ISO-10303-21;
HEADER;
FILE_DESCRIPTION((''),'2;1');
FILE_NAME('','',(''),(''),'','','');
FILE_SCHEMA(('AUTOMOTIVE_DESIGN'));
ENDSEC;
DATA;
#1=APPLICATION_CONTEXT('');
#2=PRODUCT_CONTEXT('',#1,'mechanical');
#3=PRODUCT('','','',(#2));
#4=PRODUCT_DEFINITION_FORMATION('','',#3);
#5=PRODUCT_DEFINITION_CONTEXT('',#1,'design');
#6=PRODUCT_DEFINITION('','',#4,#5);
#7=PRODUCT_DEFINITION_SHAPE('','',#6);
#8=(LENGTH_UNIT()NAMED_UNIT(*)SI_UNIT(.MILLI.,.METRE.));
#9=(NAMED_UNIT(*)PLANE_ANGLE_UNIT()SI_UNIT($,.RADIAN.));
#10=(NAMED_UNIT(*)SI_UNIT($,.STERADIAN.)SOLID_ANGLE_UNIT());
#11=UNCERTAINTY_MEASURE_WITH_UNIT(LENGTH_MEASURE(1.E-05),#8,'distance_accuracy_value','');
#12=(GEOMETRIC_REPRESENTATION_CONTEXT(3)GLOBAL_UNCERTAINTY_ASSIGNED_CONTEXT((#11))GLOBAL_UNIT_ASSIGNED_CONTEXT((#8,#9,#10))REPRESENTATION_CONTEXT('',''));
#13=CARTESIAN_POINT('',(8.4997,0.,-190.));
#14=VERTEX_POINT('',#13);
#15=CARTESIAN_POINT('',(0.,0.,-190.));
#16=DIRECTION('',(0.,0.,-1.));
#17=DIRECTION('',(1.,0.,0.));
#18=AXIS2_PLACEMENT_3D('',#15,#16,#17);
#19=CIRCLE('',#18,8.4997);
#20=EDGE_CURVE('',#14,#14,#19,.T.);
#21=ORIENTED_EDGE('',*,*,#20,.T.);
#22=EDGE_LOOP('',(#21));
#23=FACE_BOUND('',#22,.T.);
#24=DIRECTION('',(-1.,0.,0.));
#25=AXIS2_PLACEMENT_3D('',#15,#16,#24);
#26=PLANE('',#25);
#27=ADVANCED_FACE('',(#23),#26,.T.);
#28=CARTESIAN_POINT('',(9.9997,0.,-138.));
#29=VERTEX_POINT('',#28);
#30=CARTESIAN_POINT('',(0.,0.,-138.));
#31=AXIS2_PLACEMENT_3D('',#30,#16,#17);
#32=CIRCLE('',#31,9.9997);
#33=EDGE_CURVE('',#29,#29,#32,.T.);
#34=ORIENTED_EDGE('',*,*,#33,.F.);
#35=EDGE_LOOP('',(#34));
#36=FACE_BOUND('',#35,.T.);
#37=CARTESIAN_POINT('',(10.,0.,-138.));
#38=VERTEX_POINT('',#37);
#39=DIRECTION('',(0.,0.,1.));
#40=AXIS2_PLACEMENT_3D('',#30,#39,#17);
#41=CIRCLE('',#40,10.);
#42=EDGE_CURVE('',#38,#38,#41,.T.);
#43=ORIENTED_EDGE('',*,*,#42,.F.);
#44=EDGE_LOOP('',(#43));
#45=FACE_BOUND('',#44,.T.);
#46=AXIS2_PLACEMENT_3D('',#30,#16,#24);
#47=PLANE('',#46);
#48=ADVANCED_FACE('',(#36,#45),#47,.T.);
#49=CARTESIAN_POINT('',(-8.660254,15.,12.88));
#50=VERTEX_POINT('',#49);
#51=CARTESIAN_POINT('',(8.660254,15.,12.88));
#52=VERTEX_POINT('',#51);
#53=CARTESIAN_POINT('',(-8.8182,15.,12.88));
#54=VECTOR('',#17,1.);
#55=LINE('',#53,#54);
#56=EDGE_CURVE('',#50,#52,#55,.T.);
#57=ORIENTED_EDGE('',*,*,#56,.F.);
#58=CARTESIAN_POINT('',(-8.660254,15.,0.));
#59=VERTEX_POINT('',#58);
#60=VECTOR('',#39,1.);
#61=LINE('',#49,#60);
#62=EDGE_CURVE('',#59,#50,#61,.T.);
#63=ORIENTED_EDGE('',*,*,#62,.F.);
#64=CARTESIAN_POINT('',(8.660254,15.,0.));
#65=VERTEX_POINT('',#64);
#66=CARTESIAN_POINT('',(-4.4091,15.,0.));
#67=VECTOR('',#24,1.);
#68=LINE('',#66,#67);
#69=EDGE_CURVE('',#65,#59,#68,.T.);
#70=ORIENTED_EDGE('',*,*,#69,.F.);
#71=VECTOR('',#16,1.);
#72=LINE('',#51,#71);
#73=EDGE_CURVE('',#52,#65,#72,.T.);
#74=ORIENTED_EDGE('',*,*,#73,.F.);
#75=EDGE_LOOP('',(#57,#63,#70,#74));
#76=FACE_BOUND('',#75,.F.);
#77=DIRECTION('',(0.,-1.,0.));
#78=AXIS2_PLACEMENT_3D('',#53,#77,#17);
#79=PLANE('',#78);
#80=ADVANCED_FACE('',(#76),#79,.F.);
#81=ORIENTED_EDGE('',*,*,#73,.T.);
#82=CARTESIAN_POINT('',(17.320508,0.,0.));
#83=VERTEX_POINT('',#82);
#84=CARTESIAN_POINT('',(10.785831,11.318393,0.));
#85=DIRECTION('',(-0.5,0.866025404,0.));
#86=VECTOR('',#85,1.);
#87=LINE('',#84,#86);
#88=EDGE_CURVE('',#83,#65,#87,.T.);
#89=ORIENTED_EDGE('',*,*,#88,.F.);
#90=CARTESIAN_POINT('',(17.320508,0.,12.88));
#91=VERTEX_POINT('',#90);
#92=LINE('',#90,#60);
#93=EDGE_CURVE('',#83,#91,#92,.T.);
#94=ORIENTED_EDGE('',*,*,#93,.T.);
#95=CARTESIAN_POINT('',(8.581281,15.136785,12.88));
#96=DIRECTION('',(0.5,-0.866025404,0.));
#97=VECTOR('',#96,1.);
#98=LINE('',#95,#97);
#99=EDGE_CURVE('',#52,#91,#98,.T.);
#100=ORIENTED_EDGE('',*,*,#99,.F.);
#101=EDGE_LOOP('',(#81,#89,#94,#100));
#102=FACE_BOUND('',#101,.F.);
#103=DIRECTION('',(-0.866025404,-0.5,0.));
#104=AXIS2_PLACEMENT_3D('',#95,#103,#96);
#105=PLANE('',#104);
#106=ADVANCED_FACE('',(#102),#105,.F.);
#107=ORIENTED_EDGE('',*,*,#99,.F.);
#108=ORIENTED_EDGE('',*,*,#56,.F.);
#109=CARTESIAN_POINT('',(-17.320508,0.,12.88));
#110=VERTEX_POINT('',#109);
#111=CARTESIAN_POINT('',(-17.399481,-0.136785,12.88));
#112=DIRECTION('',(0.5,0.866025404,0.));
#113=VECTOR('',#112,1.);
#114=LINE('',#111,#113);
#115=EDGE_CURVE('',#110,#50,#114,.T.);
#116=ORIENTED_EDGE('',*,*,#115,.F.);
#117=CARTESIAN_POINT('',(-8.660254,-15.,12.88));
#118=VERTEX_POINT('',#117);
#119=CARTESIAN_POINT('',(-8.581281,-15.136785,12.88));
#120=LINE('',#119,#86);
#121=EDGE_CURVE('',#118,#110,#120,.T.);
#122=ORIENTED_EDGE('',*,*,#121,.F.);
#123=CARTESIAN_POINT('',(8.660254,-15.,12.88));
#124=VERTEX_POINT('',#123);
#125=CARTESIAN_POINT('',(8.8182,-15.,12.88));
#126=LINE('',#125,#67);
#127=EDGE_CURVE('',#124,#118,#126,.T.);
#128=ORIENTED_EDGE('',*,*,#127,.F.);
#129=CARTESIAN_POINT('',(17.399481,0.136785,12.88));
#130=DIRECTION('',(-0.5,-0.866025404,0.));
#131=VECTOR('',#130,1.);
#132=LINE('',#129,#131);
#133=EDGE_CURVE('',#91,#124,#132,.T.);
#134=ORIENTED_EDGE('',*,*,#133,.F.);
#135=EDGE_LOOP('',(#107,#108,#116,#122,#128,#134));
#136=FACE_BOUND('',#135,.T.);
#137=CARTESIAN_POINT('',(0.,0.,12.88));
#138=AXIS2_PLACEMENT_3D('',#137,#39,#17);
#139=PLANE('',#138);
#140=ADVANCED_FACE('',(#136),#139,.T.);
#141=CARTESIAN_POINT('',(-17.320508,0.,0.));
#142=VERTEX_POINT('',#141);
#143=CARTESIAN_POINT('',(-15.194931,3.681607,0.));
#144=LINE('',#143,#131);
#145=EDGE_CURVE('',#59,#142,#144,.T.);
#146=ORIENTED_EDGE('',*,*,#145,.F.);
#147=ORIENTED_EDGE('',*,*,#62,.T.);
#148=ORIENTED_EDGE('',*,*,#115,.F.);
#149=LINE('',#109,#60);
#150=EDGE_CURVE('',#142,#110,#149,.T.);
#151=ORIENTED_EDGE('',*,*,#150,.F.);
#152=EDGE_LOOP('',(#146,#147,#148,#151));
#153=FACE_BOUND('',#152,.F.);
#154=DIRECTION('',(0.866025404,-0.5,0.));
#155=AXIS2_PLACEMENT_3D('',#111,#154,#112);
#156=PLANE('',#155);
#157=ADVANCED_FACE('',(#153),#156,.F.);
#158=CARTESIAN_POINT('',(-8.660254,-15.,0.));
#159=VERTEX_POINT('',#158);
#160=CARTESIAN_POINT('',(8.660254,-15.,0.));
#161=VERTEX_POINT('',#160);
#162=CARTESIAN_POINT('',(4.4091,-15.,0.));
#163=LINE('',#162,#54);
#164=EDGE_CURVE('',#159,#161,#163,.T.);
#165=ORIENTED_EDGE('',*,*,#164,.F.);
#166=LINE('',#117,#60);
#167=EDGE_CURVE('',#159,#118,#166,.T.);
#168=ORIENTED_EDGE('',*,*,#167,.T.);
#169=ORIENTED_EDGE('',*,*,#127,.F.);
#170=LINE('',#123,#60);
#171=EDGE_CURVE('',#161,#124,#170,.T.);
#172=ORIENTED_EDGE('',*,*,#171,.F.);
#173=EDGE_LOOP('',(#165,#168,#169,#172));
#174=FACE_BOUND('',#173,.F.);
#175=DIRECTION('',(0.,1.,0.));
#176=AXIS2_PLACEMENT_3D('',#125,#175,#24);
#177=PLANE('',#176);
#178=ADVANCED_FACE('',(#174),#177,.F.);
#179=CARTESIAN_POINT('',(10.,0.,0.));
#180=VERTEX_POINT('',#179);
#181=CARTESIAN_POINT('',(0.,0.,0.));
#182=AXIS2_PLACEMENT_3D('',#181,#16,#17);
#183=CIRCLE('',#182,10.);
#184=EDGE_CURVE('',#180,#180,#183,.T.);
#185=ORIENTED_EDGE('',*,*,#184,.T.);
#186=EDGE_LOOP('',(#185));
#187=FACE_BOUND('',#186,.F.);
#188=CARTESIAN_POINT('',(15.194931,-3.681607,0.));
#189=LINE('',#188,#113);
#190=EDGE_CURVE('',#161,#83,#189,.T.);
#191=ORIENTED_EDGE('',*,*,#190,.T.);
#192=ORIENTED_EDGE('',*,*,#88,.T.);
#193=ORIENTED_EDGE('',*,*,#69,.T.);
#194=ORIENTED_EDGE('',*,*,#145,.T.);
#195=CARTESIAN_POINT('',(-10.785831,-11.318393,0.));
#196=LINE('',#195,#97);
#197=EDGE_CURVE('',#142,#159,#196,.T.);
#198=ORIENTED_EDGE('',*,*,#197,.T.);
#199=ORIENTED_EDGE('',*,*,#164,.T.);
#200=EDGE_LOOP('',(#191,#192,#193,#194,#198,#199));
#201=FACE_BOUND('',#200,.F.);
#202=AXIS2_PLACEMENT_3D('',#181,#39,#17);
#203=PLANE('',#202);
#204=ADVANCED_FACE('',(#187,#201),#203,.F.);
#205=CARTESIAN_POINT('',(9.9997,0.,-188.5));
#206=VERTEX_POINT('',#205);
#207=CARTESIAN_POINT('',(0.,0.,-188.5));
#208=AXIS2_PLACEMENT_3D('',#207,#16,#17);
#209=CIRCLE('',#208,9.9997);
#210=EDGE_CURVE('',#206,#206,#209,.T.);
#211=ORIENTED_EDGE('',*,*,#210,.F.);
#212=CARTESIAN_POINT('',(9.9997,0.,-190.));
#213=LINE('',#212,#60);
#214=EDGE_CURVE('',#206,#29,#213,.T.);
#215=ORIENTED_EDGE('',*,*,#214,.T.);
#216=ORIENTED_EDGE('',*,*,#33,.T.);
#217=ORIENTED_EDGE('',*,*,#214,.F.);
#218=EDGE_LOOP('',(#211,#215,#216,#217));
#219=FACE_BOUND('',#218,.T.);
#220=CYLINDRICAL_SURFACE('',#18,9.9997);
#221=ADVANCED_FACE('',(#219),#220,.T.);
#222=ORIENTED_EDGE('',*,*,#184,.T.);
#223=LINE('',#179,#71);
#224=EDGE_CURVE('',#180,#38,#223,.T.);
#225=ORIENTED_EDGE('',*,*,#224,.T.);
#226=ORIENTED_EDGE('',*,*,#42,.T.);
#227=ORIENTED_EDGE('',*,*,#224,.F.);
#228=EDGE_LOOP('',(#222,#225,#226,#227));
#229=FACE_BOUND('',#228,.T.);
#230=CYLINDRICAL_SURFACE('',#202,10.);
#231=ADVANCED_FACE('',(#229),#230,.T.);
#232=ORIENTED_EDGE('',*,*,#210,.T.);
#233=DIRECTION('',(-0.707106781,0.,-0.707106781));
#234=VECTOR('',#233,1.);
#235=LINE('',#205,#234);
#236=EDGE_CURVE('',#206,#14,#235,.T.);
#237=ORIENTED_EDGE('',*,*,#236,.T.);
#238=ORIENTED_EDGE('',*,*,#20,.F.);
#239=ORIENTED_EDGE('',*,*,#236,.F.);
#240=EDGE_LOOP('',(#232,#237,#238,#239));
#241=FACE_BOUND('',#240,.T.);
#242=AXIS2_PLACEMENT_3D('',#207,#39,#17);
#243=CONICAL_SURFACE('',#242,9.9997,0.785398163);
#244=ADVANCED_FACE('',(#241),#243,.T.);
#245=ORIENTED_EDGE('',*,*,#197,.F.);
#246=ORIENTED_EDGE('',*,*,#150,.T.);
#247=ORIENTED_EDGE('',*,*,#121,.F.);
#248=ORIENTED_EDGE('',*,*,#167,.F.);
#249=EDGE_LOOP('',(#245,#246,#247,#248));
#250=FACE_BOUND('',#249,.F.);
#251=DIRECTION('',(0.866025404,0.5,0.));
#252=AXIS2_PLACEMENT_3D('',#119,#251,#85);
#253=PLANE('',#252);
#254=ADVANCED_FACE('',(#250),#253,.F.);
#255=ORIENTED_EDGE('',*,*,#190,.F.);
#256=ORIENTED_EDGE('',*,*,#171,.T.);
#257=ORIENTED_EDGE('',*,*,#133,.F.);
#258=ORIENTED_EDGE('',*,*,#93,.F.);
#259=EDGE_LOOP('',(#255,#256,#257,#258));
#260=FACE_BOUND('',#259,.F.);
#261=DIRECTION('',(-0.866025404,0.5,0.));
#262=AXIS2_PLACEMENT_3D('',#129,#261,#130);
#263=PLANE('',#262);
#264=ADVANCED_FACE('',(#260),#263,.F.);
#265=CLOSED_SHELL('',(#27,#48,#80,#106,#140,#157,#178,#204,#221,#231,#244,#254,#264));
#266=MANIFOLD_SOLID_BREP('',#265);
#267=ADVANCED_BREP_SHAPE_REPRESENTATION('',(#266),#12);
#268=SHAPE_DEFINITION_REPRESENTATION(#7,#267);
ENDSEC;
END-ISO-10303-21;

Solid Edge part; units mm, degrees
sketch "Sketch1" plane through (0, 0, 0) normal (0, 0, 1) x (1, 0, 0)
  circle A0 centre (0, 0) radius 17.4
  dimension "D1" = 34.8
extrude "Protrusion1" add sketch "Sketch1" along normal blind 12.88
sketch "Sketch2" plane through (0, 0, 0) normal (0, 0, -1) x (1, 0, 0)
  circle A0 centre (0, 0) radius 10
extrude "Protrusion2" add sketch "Sketch2" along normal blind 190
sketch "Sketch3" plane through (0, 0, -190) normal (0, 0, -1) x (1, 0, 0)
  circle A0 centre (0, 0) radius 9.9997
extrude "Cutout1" cut sketch "Sketch3" against normal blind 52 flip side to cut
chamfer "Chamfer_1" distance 1.5 angle 45 1 edges at (-9.9997, 0, -190)
sketch "Sketch4" plane through (0, 0, 12.88) normal (0, 0, 1) x (1, 0, 0)
  line L0 (-8.8182, 15) -> (8.8182, 15)
  dimension "D1" = 30
extrude "Cutout2" cut sketch "Sketch4" against normal up to next material side at (0, 15.05, 12.88)
pattern_circular "Pattern1" count 6 over 360 about axis through (0, 0, 12.88) along (0, 0, 1) of "Cutout2"
properties part number "113474"
